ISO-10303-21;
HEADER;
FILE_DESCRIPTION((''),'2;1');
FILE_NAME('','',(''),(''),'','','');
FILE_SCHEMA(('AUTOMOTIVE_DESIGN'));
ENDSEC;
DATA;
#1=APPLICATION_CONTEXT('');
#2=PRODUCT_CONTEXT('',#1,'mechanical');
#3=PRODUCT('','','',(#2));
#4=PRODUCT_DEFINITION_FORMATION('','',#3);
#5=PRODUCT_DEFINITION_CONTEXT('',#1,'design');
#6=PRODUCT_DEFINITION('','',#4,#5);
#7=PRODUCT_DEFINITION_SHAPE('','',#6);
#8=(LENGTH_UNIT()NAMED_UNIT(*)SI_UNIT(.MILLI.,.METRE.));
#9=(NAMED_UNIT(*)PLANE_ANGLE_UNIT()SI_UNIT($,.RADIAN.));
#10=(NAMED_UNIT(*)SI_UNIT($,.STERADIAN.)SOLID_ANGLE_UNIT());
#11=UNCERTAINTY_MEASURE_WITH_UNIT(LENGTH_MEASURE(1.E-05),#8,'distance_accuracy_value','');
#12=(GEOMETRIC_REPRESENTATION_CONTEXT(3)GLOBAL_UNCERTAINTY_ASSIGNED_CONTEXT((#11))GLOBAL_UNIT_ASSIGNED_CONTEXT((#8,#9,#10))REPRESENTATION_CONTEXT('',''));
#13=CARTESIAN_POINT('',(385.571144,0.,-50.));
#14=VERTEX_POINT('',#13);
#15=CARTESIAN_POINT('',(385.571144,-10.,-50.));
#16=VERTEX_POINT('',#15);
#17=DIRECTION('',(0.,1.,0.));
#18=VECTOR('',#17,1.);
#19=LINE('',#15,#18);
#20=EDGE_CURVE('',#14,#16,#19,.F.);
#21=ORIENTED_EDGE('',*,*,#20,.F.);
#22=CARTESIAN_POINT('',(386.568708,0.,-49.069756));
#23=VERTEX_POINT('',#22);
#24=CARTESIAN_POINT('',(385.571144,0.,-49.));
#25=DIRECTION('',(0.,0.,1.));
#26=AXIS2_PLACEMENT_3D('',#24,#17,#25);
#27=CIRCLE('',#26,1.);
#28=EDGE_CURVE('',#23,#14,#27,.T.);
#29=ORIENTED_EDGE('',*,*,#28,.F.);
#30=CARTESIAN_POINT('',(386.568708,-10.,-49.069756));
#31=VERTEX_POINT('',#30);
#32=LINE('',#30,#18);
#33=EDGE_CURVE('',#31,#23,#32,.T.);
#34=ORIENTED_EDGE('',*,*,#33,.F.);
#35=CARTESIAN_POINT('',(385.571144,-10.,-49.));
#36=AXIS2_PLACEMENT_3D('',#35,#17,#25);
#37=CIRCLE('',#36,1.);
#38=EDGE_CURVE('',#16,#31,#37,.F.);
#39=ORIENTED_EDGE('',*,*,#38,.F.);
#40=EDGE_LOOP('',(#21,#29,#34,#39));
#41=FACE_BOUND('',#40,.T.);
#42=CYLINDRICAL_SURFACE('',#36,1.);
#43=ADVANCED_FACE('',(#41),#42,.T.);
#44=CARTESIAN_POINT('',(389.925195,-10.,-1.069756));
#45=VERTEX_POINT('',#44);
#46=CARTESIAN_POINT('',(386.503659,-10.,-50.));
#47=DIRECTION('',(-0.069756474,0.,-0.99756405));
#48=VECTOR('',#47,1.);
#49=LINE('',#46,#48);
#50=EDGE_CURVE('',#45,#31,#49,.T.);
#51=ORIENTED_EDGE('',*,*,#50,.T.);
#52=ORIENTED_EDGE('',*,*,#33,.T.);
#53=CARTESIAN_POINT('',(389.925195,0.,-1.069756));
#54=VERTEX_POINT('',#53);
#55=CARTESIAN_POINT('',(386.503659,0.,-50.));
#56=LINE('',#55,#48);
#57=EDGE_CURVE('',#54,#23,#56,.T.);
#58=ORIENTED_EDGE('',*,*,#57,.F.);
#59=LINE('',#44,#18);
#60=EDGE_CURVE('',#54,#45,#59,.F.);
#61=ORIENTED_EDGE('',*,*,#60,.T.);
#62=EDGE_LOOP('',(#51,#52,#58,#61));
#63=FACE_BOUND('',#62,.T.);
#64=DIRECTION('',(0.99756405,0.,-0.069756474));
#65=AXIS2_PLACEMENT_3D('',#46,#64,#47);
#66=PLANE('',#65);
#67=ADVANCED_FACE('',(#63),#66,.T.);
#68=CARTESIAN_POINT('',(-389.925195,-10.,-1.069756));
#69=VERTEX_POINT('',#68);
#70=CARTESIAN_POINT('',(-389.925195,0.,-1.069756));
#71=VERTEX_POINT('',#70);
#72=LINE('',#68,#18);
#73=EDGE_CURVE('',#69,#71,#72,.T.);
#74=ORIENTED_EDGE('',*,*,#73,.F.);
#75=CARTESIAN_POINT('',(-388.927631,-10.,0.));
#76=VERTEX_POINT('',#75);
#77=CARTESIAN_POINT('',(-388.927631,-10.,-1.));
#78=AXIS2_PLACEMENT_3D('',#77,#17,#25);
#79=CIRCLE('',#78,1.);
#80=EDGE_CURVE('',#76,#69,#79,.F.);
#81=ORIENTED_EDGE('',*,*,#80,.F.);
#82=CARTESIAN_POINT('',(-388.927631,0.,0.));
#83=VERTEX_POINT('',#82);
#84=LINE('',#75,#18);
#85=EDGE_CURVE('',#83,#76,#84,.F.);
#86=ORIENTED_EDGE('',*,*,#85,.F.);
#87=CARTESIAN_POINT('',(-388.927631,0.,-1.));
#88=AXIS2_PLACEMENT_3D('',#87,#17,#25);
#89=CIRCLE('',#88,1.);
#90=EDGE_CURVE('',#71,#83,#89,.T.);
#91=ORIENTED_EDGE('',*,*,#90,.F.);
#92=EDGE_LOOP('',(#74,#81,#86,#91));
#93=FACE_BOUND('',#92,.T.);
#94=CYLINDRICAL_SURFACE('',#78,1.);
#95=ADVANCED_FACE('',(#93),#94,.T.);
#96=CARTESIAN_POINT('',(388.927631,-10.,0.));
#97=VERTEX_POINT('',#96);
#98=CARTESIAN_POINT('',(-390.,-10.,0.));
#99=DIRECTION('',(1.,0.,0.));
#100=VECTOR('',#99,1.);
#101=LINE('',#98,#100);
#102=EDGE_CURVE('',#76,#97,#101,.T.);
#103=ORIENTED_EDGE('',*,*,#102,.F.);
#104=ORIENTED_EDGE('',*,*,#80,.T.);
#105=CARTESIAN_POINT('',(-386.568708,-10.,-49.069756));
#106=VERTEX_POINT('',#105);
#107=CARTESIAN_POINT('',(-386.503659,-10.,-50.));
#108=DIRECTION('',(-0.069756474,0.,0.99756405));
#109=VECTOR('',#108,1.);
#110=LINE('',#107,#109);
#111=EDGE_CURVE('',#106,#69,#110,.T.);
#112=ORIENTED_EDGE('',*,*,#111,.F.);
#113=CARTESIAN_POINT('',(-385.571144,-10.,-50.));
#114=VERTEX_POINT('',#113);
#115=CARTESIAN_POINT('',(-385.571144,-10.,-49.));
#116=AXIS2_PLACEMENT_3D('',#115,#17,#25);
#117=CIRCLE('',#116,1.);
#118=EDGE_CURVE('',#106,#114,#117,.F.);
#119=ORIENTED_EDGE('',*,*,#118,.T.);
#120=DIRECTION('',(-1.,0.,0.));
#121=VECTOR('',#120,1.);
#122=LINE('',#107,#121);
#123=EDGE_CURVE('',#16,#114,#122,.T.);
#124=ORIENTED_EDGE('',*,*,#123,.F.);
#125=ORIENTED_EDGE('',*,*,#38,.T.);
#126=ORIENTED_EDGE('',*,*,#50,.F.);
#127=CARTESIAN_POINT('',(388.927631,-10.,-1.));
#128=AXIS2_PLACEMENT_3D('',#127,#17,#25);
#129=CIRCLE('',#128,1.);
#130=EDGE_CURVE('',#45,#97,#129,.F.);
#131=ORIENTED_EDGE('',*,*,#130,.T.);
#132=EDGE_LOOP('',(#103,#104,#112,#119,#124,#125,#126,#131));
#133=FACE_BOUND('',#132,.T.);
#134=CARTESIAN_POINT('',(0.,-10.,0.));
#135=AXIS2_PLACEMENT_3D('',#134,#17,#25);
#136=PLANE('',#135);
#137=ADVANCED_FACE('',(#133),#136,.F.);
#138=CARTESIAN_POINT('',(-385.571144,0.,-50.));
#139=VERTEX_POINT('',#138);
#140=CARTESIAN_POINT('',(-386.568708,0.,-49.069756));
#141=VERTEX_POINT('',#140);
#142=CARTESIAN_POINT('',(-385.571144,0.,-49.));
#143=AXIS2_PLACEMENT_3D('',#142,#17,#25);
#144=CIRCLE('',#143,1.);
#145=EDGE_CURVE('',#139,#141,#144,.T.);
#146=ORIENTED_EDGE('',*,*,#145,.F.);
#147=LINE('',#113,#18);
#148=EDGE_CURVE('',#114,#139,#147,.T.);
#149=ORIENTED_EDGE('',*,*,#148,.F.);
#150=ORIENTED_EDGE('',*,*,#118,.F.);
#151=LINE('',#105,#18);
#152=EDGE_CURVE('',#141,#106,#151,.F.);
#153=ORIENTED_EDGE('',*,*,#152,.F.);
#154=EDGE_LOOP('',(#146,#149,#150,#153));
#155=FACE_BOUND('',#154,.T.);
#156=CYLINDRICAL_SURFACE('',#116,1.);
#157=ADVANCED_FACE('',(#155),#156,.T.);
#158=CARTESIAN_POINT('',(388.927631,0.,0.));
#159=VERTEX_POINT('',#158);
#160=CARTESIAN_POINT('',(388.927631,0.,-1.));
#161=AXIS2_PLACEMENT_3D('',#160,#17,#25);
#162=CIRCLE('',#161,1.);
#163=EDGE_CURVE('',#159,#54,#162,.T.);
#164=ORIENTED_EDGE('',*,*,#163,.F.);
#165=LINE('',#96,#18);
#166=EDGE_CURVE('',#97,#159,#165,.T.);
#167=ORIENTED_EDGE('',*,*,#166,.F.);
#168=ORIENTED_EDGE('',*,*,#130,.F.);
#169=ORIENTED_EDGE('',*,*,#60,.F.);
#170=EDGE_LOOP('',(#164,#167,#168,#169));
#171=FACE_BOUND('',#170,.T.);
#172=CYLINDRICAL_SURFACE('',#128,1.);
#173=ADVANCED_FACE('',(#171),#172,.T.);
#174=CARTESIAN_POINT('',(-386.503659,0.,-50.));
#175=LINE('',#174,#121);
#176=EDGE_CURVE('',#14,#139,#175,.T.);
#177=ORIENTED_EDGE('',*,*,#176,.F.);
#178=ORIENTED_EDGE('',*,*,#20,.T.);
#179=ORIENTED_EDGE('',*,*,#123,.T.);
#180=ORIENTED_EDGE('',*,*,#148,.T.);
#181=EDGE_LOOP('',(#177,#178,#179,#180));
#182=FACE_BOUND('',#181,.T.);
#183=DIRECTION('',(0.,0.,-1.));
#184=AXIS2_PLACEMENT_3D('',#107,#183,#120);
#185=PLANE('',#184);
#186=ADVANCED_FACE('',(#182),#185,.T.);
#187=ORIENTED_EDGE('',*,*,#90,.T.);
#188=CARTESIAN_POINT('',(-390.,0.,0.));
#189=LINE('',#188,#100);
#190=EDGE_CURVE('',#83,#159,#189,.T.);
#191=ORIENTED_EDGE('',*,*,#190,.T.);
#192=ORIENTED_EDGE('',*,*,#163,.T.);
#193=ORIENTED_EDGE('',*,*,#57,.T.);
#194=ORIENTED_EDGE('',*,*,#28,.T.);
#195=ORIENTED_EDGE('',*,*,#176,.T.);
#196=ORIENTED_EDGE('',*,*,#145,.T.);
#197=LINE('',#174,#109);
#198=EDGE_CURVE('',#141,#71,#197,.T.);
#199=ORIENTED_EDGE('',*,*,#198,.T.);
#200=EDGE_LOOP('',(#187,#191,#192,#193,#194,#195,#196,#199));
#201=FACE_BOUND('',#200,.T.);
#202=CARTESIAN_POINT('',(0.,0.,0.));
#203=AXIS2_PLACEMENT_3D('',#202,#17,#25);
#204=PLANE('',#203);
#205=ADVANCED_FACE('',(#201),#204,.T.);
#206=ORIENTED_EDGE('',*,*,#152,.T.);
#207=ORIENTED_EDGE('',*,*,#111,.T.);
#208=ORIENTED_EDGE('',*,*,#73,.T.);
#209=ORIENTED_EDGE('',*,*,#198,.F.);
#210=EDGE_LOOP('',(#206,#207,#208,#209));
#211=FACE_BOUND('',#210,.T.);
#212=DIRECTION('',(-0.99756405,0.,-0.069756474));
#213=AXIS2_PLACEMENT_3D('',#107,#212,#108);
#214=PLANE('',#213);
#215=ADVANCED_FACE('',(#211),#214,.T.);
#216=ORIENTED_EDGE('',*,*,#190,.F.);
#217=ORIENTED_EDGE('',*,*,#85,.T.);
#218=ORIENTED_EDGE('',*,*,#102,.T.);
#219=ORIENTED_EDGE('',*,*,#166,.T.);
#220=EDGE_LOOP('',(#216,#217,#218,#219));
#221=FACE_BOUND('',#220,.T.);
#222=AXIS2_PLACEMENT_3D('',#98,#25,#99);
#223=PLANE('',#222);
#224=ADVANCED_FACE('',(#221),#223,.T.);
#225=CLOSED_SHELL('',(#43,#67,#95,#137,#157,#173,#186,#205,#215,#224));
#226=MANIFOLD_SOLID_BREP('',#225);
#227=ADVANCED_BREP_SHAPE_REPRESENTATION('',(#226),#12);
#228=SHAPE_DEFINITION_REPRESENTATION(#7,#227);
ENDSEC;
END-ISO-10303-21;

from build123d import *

# Parameters (mm, degrees)
BASE_FLANGE1_DEPTH = 10
FILLET_1_0_R       = 1


# Sheet-metal steps are written as plain solids
with BuildPart() as part:
    # Sketch1 → Base-Flange1 (new body)
    with BuildSketch(Plane(origin=(0, 0, 0), x_dir=(1, 0, 0), z_dir=(0, 1, 0))):
        Polygon((-386.503659403, 50), (386.503659403, 50), (390, 0), (-390, 0), align=None)
    extrude(amount=-BASE_FLANGE1_DEPTH)

    # Fillet-1.0
    fillet_1_0_edges = [part.edges().sort_by_distance(p)[0] for p in [
        (-386.503659403, -5, -50),
        (386.503659403, -5, -50),
        (390, -5, 0),
        (-390, -5, 0),
    ]]
    fillet(fillet_1_0_edges, radius=FILLET_1_0_R)


solid = part.part
